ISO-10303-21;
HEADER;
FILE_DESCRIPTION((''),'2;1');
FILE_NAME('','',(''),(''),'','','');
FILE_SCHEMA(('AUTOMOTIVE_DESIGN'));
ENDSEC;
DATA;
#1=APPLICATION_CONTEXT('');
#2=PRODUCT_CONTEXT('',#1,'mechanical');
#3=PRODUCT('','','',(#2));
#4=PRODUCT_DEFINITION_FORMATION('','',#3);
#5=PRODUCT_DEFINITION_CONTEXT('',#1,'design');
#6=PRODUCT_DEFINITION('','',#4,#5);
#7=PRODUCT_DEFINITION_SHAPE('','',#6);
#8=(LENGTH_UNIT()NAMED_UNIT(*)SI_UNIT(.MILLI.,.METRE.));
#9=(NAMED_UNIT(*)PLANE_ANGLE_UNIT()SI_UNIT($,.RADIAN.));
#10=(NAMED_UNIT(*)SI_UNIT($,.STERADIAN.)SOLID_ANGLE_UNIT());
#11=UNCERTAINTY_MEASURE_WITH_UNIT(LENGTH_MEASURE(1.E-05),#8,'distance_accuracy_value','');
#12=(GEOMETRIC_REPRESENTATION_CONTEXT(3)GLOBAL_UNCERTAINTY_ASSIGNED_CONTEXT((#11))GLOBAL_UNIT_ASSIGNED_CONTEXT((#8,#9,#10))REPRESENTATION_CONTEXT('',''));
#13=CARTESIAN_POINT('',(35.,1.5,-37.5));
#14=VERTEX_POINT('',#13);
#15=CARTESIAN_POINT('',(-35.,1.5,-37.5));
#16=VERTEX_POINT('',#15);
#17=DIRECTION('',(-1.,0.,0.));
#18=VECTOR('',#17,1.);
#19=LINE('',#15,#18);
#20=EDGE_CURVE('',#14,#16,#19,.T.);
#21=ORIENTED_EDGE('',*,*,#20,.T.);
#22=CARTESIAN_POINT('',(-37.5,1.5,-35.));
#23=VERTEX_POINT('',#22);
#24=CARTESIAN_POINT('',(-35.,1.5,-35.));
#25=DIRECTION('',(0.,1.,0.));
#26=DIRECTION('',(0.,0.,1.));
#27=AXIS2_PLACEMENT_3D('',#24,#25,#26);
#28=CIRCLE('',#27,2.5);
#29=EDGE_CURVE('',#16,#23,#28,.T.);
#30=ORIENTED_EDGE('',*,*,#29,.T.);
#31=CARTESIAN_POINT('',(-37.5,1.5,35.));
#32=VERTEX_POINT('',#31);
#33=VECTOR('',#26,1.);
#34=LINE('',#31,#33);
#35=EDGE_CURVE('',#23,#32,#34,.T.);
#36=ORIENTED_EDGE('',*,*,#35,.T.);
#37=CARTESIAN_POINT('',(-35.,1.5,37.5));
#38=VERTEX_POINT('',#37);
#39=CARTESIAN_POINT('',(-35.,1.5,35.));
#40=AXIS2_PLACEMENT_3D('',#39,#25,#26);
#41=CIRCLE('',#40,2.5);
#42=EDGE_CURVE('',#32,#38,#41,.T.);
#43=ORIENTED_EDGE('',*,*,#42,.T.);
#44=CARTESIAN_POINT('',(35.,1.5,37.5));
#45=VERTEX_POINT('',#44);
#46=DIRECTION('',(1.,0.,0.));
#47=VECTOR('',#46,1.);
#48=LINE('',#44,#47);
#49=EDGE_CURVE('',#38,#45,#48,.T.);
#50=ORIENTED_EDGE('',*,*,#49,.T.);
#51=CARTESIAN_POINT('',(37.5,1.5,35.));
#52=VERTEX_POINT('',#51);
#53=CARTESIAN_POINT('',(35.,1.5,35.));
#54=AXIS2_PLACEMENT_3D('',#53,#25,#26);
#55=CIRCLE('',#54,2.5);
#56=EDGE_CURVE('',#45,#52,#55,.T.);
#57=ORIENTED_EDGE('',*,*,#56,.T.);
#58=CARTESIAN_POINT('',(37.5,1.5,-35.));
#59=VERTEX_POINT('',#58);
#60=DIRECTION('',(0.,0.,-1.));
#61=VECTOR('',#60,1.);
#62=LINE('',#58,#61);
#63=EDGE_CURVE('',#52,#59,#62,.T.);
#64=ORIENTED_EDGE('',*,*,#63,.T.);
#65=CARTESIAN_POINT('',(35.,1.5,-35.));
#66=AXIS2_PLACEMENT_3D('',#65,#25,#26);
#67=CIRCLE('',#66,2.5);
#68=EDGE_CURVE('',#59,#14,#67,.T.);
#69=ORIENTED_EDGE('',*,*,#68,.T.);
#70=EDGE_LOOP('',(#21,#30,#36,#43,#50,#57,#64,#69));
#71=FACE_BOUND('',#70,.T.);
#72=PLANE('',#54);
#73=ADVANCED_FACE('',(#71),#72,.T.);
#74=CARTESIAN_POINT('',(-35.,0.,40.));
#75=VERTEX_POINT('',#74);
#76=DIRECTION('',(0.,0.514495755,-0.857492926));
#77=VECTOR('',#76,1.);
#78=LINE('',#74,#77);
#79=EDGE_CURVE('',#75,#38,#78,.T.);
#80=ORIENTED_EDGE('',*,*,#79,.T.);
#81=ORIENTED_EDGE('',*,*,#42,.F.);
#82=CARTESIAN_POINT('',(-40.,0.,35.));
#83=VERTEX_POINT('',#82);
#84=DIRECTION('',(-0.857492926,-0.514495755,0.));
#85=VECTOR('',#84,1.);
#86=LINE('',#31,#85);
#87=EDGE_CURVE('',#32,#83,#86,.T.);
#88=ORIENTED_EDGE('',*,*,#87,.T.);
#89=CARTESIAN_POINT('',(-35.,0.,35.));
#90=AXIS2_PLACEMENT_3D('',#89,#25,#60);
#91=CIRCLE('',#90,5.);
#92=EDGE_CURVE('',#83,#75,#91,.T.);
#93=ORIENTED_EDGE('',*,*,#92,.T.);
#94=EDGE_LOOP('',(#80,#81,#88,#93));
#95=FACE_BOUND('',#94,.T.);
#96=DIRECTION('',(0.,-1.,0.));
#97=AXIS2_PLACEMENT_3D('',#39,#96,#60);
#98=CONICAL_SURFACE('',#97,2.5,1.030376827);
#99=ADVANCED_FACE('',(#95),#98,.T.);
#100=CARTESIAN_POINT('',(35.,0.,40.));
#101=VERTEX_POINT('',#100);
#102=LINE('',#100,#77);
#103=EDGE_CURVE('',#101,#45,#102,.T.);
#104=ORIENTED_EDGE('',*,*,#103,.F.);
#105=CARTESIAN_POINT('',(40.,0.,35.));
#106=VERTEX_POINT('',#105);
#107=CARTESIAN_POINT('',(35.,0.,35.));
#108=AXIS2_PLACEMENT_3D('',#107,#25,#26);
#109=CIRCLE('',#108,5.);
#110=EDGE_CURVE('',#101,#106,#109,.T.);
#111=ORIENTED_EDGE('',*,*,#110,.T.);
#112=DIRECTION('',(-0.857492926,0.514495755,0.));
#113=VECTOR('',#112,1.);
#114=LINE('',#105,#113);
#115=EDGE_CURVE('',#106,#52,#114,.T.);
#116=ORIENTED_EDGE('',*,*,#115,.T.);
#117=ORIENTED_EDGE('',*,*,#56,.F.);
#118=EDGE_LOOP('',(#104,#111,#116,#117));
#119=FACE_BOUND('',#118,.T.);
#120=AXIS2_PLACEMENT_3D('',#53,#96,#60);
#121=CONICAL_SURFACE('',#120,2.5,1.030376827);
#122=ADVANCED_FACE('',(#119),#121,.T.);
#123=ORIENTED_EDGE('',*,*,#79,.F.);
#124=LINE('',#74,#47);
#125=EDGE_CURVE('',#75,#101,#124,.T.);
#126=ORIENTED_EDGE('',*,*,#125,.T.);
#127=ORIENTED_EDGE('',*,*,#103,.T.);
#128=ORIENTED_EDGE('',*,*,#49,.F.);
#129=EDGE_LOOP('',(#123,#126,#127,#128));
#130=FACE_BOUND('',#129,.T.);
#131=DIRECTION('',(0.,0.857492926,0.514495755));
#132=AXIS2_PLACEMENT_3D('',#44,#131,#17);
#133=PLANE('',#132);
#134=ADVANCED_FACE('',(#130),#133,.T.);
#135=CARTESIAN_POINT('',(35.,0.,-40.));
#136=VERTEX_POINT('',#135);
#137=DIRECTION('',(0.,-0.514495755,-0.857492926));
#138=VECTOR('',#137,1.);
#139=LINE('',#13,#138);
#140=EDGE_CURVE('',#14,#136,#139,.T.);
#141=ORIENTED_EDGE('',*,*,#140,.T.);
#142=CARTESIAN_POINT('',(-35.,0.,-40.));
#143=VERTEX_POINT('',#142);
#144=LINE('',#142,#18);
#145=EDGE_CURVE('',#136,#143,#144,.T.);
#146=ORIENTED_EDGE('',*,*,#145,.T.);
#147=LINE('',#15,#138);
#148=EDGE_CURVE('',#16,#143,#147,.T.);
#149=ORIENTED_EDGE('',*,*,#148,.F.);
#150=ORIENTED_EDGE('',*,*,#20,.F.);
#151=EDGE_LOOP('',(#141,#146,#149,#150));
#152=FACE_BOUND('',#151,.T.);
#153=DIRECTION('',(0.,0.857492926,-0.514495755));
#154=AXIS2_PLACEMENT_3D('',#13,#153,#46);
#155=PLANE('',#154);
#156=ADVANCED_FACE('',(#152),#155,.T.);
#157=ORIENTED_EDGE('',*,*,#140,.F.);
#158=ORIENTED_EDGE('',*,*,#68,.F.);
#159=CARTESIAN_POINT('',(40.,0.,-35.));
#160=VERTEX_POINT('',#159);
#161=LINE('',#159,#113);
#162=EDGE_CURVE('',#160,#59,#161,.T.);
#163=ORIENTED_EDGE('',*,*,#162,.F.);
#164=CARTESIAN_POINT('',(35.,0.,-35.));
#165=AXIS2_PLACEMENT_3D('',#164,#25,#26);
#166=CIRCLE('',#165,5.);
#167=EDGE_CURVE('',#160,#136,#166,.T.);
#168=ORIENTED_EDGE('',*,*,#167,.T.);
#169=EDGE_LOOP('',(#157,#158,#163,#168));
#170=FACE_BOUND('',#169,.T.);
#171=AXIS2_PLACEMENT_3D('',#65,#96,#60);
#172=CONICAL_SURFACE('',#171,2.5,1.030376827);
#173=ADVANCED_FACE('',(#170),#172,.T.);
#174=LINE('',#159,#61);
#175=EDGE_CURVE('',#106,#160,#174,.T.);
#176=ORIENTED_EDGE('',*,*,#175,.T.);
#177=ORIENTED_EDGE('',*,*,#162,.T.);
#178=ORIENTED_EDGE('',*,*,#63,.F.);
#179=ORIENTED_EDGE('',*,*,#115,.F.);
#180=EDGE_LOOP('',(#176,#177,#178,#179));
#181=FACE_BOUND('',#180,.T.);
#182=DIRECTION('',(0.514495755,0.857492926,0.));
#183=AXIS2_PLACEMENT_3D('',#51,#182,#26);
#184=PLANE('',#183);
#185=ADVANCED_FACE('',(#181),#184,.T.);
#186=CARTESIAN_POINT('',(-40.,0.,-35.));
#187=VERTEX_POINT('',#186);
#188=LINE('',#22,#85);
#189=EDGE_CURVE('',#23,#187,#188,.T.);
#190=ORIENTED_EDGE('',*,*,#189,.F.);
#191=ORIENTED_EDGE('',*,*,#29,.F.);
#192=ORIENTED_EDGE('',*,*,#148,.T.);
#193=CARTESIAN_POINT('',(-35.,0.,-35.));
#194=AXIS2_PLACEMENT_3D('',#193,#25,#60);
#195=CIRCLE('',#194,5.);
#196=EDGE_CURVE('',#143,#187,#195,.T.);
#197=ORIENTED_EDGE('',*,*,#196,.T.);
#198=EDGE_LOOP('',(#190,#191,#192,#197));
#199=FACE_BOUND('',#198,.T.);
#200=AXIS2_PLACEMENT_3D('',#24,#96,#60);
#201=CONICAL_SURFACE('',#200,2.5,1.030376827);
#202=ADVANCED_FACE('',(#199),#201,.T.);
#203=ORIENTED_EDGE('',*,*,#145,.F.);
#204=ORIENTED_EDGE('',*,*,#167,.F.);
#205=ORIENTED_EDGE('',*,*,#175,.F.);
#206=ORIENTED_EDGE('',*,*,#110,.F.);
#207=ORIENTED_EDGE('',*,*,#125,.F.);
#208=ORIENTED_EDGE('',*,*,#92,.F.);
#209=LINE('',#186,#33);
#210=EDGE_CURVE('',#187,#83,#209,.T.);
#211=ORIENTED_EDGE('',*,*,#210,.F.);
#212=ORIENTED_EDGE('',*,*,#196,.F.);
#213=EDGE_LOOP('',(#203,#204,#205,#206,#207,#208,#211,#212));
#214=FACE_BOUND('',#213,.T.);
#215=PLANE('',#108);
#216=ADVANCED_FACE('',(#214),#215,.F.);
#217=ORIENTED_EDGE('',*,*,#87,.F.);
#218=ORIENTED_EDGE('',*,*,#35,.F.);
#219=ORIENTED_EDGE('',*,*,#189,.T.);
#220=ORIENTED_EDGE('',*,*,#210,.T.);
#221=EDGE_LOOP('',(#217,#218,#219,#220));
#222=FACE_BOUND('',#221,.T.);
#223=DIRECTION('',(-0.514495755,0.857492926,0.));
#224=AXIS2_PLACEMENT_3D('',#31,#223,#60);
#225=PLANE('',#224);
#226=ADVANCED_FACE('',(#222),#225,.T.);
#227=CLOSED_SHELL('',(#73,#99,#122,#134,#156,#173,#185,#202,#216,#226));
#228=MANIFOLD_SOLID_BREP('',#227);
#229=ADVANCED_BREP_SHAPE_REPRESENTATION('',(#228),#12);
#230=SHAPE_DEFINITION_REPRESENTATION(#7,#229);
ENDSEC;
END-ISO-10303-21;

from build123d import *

# Parameters (mm, degrees)
BOSS_EXTRUDE1_DEPTH = 1.5
CHAMFER1_SIZE       = 1.5
CHAMFER1_SIZE_2     = 2.5


with BuildPart() as part:
    # Sketch1 → Boss-Extrude1 (new body)
    with BuildSketch(Plane(origin=(0, 0, 0), x_dir=(1, 0, 0), z_dir=(0, 1, 0))):
        with BuildLine():
            Line((-35, 40), (35, 40))
            ThreePointArc((35, 40), (38.535533906, 38.535533906), (40, 35))
            Line((40, 35), (40, -35))
            ThreePointArc((40, -35), (38.535533906, -38.535533906), (35, -40))
            Line((35, -40), (-35, -40))
            ThreePointArc((-35, -40), (-38.535533906, -38.535533906), (-40, -35))
            Line((-40, -35), (-40, 35))
            ThreePointArc((-40, 35), (-38.535533906, 38.535533906), (-35, 40))
        make_face()
    extrude(amount=BOSS_EXTRUDE1_DEPTH)

    # Chamfer1
    # the kernel refuses this chamfer: 2.5, 1.5 mm, written as the material it takes off along each edge
    with BuildSketch(Plane(origin=(-35, 1.5, 35), x_dir=(0, 0, 1), z_dir=(1, 0, 0))) as chamfer1_piece_1:
        Polygon((5, CHAMFER1_SIZE), (5 - CHAMFER1_SIZE_2, 0), (5, 0), align=None)
    revolve(axis=Axis((-35, 1.5, 35), (0, -1, 0)), revolution_arc=90, mode=Mode.SUBTRACT)
    with BuildSketch(Plane(origin=(-40, 1.5, 35), x_dir=(-0.05518620705976808, -0.9984760801092615, 0), z_dir=(0, 0, -1)), Plane(origin=(-35, 1.5, -40), x_dir=(0, -0.9984760801092615, -0.05518620705976808), z_dir=(1, 0, 0)), Plane(origin=(35, 1.5, 40), x_dir=(0, -0.9984760801092615, 0.05518620705976808), z_dir=(-1, 0, 0)), Plane(origin=(40, 1.5, -35), x_dir=(0.05518620705976808, -0.9984760801092615, 0), z_dir=(0, 0, 1))) as chamfer1_piece_2:
        Polygon((CHAMFER1_SIZE * 0.998476080109, -CHAMFER1_SIZE * 0.0551862070598), (-CHAMFER1_SIZE_2 * 0.0551862070598, -CHAMFER1_SIZE_2 * 0.998476080109), (0, 0), align=None)
    extrude(amount=70, mode=Mode.SUBTRACT)
    with BuildSketch(Plane(origin=(-35, 1.5, -35), x_dir=(-1, 0, 0), z_dir=(0, 0, 1))) as chamfer1_piece_3:
        Polygon((5, CHAMFER1_SIZE), (5 - CHAMFER1_SIZE_2, 0), (5, 0), align=None)
    revolve(axis=Axis((-35, 1.5, -35), (0, -1, 0)), revolution_arc=90, mode=Mode.SUBTRACT)
    with BuildSketch(Plane(origin=(35, 1.5, -35), x_dir=(0, 0, -1), z_dir=(-1, 0, 0))) as chamfer1_piece_4:
        Polygon((5, CHAMFER1_SIZE), (5 - CHAMFER1_SIZE_2, 0), (5, 0), align=None)
    revolve(axis=Axis((35, 1.5, -35), (0, -1, 0)), revolution_arc=90, mode=Mode.SUBTRACT)
    with BuildSketch(Plane(origin=(35, 1.5, 35), x_dir=(1, 0, 0), z_dir=(0, 0, -1))) as chamfer1_piece_5:
        Polygon((5, CHAMFER1_SIZE), (5 - CHAMFER1_SIZE_2, 0), (5, 0), align=None)
    revolve(axis=Axis((35, 1.5, 35), (0, -1, 0)), revolution_arc=90, mode=Mode.SUBTRACT)


solid = part.part
